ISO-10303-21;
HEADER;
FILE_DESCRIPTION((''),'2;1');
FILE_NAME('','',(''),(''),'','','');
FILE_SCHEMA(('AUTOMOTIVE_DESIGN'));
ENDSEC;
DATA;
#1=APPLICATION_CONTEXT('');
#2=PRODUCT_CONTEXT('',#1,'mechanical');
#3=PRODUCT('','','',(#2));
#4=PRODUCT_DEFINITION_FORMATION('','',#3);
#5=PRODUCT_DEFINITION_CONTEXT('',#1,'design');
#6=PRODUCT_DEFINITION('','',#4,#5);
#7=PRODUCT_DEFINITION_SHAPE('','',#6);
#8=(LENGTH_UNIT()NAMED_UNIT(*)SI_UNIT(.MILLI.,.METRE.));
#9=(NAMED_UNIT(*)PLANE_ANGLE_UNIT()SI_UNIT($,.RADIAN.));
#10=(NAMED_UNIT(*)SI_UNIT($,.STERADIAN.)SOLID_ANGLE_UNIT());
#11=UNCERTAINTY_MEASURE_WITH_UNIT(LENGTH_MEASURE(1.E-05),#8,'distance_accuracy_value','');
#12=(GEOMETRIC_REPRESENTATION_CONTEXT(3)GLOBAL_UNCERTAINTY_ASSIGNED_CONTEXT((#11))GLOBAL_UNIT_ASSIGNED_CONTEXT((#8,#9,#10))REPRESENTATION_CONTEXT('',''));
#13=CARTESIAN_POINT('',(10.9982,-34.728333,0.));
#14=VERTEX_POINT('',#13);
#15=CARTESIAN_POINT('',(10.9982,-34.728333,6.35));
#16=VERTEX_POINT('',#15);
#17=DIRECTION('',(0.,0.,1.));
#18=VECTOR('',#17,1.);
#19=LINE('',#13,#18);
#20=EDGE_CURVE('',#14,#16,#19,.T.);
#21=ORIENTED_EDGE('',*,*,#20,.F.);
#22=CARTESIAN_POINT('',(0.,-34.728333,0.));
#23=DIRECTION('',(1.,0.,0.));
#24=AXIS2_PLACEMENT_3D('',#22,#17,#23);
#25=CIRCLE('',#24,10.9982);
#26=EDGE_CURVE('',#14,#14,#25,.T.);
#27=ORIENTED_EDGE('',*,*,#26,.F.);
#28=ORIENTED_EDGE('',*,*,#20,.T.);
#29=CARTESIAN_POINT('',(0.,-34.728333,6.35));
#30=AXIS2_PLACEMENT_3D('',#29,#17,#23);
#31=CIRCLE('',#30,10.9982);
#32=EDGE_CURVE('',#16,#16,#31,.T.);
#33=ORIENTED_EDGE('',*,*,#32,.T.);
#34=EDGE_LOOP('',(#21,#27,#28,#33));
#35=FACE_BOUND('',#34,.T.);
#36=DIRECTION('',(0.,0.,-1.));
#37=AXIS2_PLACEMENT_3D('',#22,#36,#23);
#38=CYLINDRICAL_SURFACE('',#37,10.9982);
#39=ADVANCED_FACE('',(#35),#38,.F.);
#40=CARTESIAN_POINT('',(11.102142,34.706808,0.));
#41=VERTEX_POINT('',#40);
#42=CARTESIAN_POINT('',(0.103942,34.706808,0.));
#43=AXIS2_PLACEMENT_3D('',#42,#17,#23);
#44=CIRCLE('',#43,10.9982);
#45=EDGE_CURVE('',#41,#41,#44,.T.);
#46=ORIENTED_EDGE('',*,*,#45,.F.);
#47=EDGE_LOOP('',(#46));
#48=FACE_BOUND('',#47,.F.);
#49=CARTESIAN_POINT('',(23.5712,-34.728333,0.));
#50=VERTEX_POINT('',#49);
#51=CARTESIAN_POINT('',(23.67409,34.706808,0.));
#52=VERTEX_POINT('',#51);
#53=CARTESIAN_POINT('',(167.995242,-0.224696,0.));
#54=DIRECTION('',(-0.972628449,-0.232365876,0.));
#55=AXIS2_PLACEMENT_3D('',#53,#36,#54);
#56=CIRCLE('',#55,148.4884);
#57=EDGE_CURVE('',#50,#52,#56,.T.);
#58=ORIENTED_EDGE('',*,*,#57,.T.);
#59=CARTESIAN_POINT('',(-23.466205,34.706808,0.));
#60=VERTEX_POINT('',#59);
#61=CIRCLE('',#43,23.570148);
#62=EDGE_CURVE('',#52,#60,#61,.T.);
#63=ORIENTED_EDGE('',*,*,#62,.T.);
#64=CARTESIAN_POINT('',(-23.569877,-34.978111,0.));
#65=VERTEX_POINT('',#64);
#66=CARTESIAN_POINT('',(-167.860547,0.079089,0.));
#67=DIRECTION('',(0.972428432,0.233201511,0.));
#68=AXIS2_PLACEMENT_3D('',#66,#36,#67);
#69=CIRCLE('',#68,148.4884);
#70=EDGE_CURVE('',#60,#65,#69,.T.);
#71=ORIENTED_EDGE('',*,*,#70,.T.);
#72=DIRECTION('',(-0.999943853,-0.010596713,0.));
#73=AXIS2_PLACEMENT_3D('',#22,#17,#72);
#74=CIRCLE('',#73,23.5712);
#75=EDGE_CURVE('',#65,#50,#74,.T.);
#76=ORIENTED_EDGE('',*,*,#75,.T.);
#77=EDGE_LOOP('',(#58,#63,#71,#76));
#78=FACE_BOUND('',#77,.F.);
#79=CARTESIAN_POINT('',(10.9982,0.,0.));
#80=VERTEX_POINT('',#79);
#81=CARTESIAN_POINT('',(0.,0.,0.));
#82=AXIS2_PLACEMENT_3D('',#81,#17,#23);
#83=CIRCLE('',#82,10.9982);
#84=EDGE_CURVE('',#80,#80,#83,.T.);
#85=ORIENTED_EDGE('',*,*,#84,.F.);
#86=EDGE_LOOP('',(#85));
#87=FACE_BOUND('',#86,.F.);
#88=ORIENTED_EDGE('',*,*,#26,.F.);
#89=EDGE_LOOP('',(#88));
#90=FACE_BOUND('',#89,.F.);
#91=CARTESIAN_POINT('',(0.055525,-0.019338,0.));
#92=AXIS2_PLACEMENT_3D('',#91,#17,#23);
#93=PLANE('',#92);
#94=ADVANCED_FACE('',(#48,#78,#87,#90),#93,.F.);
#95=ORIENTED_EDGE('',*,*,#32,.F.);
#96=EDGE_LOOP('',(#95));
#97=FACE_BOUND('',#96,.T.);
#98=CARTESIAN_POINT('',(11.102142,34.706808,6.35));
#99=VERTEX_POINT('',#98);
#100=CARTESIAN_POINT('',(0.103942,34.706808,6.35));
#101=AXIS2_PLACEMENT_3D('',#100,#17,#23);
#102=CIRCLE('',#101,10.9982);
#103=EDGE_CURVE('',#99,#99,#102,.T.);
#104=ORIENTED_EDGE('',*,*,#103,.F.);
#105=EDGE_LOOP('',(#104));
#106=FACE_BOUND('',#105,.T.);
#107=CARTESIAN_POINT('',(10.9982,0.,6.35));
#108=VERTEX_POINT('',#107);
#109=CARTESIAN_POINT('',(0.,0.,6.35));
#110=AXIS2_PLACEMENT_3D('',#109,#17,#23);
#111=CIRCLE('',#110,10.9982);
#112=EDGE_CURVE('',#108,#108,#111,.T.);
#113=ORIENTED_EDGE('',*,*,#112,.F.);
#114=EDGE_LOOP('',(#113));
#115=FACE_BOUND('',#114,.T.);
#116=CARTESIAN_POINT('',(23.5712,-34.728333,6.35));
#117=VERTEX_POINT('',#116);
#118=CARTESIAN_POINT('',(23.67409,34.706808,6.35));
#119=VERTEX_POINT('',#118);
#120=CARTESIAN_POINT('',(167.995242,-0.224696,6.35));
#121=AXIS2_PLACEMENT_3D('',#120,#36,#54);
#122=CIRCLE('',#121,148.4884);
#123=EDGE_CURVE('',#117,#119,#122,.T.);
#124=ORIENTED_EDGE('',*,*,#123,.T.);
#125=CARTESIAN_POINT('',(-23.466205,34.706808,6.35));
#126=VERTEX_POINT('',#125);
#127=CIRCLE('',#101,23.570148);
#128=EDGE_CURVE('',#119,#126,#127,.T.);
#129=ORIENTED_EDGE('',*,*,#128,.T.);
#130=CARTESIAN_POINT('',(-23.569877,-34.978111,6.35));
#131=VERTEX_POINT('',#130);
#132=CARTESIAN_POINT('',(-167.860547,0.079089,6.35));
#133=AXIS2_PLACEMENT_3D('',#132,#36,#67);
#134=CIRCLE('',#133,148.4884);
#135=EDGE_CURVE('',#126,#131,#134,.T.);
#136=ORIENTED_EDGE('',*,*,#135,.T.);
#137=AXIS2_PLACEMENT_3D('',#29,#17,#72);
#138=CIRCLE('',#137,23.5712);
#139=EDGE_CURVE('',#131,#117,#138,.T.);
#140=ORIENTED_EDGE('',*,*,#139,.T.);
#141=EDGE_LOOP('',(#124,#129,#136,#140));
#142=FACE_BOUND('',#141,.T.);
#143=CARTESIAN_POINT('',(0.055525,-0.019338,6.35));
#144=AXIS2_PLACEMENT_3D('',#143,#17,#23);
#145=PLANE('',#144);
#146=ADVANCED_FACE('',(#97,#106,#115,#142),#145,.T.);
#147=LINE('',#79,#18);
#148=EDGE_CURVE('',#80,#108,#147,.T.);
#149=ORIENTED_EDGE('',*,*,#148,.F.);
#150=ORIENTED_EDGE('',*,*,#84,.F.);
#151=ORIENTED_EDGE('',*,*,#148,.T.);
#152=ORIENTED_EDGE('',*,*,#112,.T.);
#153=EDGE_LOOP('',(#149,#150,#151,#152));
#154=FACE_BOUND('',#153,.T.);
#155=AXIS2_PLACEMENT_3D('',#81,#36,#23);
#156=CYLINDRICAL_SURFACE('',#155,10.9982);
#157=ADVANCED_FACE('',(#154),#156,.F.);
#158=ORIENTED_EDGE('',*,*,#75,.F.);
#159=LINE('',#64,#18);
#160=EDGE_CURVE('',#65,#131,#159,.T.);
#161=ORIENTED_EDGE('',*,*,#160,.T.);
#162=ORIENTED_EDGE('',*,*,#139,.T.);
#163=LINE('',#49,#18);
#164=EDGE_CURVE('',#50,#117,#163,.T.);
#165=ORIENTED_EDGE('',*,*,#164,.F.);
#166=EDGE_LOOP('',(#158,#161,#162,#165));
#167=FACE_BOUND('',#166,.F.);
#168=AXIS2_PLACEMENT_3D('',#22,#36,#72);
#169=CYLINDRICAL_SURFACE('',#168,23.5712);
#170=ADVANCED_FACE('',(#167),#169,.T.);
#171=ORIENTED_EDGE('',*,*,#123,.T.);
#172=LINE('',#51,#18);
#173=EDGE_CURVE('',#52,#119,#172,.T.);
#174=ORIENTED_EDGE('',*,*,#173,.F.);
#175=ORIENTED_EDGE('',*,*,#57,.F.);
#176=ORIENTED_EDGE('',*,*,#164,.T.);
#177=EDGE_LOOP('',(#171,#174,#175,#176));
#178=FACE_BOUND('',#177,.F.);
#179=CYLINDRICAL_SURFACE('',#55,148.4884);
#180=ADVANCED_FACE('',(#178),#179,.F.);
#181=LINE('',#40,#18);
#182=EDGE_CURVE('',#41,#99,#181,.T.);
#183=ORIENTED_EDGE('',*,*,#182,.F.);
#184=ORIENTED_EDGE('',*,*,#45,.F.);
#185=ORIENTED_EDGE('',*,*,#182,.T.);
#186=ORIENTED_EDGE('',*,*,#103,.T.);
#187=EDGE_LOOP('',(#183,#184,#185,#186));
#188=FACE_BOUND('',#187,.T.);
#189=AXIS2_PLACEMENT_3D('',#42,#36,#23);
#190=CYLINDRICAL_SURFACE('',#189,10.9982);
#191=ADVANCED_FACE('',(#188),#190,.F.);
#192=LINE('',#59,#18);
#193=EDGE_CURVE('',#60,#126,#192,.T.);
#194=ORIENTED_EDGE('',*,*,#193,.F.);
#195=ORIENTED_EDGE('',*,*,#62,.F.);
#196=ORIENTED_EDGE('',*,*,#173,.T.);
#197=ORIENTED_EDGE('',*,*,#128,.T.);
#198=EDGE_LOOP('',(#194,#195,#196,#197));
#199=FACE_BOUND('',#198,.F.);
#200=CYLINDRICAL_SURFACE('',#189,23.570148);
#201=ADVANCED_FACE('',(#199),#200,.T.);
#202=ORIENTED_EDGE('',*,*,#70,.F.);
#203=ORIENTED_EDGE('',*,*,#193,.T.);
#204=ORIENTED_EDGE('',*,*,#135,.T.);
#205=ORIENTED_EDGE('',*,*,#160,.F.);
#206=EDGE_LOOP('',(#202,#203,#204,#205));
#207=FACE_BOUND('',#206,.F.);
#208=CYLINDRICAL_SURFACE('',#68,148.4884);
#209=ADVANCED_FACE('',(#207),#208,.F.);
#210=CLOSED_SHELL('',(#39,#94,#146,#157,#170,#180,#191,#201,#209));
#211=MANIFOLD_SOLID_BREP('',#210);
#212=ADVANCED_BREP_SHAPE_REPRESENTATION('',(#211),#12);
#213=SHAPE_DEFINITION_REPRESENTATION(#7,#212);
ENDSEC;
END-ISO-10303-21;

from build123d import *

# Parameters (mm, degrees)
F0_R     = 10.9982
F1_DEPTH = 6.35


# Not quite as in the source:
# - a feature names something its author has since deleted; it is built from what else it names


with BuildPart() as f1:
    # F0 (on Top) → F1 (new body)
    with BuildSketch(Plane.XY):
        with BuildLine():
            ThreePointArc((23.5712, -34.728333354), (19.5070052041, -0.0046640159), (23.674090089, 34.706808082))
            ThreePointArc((23.674090089, 34.706808082), (0.1039423202, 58.2769558508), (-23.4662054486, 34.706808082))
            ThreePointArc((-23.4662054486, 34.706808082), (-19.3723117522, -0.1418189062), (-23.569876554, -34.9781105903))
            ThreePointArc((-23.569876554, -34.9781105903), (0.1248903712, -58.2992024902), (23.5712, -34.728333354))
        make_face()
        with Locations((0, -34.728333354)):
            Circle(F0_R, mode=Mode.SUBTRACT)
        Circle(F0_R, mode=Mode.SUBTRACT)
        with Locations((0.1039423202, 34.706808082)):
            Circle(F0_R, mode=Mode.SUBTRACT)
    extrude(amount=F1_DEPTH)


solid = f1.part
